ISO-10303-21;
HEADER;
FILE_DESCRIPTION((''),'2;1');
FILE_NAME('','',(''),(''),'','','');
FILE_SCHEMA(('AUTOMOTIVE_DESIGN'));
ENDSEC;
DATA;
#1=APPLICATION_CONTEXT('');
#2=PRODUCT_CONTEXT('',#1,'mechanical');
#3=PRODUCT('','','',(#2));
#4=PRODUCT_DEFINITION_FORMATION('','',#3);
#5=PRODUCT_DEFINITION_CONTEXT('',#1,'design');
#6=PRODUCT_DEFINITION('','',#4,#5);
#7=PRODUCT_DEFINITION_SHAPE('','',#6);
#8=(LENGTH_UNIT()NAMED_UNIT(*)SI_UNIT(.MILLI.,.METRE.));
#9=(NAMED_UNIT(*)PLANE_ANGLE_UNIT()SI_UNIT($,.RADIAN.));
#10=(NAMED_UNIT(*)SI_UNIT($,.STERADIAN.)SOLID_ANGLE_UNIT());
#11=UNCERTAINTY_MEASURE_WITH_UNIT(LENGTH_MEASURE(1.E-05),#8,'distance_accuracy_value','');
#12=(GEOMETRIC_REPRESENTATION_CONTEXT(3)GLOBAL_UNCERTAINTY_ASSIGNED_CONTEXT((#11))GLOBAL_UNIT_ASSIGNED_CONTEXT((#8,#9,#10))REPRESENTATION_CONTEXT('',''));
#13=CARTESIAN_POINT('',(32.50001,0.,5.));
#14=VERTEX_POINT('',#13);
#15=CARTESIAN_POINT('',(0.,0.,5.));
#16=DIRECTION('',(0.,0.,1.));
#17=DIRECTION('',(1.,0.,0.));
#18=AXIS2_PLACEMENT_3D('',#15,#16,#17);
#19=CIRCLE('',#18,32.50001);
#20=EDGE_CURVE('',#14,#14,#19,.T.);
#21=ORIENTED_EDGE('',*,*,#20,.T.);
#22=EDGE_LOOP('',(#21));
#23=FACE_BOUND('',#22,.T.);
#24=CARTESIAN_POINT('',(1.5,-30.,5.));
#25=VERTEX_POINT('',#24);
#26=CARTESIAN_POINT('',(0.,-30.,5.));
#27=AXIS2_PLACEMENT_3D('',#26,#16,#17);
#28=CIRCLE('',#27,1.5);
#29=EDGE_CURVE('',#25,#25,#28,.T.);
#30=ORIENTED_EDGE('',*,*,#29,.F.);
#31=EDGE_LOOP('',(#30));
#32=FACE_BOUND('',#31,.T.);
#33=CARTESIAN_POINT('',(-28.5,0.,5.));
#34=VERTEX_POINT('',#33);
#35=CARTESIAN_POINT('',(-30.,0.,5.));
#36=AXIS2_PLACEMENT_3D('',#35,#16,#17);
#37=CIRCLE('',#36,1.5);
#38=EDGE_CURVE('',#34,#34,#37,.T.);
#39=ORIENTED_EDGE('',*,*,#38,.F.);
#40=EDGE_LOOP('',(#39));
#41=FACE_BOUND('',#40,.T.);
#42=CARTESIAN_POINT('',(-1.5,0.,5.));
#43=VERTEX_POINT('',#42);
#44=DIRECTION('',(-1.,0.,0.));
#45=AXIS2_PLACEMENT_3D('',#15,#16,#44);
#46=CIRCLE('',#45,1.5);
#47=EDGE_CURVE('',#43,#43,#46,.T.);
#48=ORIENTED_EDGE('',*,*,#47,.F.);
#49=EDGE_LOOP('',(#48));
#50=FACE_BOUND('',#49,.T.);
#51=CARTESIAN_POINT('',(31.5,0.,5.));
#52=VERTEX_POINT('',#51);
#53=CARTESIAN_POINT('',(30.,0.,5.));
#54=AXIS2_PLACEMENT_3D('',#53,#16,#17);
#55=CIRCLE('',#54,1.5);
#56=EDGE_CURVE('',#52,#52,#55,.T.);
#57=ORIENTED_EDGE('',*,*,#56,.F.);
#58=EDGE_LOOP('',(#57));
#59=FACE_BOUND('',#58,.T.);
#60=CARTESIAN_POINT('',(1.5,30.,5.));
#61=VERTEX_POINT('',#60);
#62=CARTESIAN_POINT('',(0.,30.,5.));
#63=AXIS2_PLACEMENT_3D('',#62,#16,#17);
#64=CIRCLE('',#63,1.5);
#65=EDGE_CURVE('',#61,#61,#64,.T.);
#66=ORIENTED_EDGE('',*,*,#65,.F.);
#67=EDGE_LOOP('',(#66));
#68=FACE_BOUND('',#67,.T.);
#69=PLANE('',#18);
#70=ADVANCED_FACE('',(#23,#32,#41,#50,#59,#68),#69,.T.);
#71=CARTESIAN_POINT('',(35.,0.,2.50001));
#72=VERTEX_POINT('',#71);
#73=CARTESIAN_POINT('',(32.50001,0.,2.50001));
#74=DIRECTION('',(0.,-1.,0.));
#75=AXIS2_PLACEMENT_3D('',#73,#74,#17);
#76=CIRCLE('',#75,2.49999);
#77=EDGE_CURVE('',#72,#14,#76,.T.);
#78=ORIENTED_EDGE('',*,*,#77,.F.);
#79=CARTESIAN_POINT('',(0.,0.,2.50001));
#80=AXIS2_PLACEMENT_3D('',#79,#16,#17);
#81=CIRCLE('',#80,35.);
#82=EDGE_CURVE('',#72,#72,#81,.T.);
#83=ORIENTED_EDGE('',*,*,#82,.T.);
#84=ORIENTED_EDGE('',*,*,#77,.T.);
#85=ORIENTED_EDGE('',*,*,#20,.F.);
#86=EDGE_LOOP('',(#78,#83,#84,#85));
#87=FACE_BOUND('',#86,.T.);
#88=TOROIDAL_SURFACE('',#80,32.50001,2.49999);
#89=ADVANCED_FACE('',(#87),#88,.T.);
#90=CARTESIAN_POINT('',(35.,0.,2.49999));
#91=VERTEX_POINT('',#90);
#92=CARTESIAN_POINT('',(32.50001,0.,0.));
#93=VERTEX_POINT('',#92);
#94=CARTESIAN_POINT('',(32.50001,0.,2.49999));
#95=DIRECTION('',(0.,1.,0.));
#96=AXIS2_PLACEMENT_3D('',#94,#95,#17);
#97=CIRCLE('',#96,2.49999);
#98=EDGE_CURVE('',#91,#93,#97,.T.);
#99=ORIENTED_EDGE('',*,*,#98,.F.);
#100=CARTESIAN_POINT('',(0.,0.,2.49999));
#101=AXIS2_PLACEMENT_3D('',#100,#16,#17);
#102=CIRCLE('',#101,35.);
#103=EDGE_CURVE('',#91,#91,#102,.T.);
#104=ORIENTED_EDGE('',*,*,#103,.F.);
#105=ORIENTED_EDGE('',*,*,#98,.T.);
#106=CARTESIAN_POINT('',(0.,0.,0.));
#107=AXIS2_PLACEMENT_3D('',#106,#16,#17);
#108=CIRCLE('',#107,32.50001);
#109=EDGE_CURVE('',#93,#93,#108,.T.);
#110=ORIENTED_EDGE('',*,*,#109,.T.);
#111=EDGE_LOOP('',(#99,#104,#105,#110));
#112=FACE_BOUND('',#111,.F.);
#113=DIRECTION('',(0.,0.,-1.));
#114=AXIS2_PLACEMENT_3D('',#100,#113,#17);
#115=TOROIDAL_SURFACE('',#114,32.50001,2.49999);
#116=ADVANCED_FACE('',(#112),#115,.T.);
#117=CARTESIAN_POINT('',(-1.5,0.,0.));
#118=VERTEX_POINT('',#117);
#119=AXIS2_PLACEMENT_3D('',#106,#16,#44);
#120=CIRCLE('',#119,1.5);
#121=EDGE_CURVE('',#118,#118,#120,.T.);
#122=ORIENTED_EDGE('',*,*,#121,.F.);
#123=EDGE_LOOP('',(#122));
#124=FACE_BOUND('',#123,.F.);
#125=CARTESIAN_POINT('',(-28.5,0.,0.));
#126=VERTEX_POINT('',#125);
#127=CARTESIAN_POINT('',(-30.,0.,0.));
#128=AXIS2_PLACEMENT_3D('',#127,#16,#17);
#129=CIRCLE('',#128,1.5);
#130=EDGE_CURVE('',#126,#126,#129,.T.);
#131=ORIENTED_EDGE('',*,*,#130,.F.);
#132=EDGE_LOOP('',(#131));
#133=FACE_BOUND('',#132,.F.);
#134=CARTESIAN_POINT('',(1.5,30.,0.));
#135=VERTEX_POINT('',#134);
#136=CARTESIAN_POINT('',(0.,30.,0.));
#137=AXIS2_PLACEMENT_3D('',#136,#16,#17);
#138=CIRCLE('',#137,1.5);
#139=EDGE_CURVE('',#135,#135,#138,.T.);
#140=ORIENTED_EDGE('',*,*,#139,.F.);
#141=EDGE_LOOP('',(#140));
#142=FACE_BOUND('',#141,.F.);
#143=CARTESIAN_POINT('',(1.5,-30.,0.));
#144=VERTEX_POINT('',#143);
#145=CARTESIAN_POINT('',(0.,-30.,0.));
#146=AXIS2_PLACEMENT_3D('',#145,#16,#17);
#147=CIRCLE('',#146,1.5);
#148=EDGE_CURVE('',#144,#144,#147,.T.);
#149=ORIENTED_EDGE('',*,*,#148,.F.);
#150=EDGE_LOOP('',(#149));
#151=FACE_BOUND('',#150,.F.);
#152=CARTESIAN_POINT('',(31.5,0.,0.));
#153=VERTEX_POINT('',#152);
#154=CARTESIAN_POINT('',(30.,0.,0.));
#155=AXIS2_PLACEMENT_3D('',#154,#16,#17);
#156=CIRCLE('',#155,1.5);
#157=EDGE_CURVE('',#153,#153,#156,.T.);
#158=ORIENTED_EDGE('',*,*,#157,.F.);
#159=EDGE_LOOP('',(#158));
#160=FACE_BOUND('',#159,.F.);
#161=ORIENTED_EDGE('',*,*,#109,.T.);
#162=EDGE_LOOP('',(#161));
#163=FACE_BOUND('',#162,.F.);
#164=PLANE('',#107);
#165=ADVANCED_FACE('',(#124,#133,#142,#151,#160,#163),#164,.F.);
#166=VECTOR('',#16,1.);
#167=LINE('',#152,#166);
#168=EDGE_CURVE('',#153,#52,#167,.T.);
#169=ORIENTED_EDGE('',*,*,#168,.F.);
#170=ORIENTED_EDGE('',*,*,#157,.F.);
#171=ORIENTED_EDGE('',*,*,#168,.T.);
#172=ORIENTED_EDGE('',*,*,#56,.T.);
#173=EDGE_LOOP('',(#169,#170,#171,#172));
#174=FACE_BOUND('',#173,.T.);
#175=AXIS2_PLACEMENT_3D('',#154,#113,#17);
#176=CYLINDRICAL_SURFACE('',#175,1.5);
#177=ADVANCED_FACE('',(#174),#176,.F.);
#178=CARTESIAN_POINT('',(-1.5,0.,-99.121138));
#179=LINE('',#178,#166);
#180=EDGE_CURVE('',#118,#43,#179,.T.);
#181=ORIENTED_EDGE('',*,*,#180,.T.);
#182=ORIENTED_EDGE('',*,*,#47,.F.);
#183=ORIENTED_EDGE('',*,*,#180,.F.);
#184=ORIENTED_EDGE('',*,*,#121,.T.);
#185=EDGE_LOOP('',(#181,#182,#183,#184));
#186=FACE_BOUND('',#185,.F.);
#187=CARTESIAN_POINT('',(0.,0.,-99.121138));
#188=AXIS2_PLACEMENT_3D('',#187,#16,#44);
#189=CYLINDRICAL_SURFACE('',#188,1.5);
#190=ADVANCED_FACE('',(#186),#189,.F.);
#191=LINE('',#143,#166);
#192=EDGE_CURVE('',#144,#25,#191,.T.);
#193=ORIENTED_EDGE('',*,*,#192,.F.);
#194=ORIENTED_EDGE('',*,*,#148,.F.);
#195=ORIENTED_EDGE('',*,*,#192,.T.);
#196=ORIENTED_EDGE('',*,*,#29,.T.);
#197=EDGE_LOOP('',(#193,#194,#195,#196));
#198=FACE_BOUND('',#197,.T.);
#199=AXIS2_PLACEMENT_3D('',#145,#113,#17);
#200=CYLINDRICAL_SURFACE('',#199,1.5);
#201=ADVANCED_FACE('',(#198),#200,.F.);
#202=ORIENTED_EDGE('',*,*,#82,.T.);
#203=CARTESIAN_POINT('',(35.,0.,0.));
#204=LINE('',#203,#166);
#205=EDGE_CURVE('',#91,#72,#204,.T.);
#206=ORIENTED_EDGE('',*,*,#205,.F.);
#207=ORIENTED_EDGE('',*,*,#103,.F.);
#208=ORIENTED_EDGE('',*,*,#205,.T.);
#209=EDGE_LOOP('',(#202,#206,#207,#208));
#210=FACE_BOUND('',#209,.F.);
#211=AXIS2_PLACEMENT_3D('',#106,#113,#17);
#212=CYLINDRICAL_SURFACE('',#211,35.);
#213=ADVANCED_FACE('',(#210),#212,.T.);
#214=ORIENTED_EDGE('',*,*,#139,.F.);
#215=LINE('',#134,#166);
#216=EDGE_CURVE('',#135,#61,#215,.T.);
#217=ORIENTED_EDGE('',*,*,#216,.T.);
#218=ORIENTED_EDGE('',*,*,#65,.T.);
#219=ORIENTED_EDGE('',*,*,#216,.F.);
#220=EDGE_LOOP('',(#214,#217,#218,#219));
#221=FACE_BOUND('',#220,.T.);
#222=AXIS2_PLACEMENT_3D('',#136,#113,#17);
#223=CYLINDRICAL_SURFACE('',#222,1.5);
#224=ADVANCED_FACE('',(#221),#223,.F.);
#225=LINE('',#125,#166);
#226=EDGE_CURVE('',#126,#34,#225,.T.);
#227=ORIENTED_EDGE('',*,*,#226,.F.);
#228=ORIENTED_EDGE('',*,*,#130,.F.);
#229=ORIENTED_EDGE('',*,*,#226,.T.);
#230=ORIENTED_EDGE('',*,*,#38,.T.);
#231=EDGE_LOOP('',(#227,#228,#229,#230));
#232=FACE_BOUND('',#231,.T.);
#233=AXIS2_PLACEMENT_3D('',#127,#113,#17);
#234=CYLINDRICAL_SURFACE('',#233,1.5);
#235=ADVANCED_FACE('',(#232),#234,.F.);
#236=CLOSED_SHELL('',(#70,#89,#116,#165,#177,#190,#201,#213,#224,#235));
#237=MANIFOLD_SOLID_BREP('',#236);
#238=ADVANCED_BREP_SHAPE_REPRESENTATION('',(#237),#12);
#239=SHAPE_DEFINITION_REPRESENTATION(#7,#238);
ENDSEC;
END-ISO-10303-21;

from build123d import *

# Parameters (mm, degrees)
F0_R     = 35
F0_R_2   = 1.5
F1_DEPTH = 5
F2_R     = 2.49999
F3_D     = 3


# Not quite as in the source:
# - a fillet or chamfer is up to 0.001 mm smaller than in the source, because OpenCascade refuses the exact size


with BuildPart() as f1:
    # F0 (on Top) → F1 (new body)
    with BuildSketch(Plane.XY):
        Circle(F0_R)
        with Locations((0, -30)):
            Circle(F0_R_2, mode=Mode.SUBTRACT)
        with Locations((-30, 0)):
            Circle(F0_R_2, mode=Mode.SUBTRACT)
        with Locations((30, 0)):
            Circle(F0_R_2, mode=Mode.SUBTRACT)
        with Locations((0, 30)):
            Circle(F0_R_2, mode=Mode.SUBTRACT)
    extrude(amount=F1_DEPTH)

    # F2 (radius 2.5 in the source; OpenCascade refuses exactly that, so slightly less here)
    f2_edges = [f1.edges().sort_by_distance(p)[0] for p in [
        (-35, 0, 5),
        (-35, 0, 0),
    ]]
    fillet(f2_edges, radius=F2_R)

    # F3 (through all)
    with Locations(Plane(origin=(0, 0, 0), x_dir=(1, 0, 0), z_dir=(0, 0, -1))):
        with Locations((0, 0)):
            Hole(F3_D / 2)


solid = f1.part
